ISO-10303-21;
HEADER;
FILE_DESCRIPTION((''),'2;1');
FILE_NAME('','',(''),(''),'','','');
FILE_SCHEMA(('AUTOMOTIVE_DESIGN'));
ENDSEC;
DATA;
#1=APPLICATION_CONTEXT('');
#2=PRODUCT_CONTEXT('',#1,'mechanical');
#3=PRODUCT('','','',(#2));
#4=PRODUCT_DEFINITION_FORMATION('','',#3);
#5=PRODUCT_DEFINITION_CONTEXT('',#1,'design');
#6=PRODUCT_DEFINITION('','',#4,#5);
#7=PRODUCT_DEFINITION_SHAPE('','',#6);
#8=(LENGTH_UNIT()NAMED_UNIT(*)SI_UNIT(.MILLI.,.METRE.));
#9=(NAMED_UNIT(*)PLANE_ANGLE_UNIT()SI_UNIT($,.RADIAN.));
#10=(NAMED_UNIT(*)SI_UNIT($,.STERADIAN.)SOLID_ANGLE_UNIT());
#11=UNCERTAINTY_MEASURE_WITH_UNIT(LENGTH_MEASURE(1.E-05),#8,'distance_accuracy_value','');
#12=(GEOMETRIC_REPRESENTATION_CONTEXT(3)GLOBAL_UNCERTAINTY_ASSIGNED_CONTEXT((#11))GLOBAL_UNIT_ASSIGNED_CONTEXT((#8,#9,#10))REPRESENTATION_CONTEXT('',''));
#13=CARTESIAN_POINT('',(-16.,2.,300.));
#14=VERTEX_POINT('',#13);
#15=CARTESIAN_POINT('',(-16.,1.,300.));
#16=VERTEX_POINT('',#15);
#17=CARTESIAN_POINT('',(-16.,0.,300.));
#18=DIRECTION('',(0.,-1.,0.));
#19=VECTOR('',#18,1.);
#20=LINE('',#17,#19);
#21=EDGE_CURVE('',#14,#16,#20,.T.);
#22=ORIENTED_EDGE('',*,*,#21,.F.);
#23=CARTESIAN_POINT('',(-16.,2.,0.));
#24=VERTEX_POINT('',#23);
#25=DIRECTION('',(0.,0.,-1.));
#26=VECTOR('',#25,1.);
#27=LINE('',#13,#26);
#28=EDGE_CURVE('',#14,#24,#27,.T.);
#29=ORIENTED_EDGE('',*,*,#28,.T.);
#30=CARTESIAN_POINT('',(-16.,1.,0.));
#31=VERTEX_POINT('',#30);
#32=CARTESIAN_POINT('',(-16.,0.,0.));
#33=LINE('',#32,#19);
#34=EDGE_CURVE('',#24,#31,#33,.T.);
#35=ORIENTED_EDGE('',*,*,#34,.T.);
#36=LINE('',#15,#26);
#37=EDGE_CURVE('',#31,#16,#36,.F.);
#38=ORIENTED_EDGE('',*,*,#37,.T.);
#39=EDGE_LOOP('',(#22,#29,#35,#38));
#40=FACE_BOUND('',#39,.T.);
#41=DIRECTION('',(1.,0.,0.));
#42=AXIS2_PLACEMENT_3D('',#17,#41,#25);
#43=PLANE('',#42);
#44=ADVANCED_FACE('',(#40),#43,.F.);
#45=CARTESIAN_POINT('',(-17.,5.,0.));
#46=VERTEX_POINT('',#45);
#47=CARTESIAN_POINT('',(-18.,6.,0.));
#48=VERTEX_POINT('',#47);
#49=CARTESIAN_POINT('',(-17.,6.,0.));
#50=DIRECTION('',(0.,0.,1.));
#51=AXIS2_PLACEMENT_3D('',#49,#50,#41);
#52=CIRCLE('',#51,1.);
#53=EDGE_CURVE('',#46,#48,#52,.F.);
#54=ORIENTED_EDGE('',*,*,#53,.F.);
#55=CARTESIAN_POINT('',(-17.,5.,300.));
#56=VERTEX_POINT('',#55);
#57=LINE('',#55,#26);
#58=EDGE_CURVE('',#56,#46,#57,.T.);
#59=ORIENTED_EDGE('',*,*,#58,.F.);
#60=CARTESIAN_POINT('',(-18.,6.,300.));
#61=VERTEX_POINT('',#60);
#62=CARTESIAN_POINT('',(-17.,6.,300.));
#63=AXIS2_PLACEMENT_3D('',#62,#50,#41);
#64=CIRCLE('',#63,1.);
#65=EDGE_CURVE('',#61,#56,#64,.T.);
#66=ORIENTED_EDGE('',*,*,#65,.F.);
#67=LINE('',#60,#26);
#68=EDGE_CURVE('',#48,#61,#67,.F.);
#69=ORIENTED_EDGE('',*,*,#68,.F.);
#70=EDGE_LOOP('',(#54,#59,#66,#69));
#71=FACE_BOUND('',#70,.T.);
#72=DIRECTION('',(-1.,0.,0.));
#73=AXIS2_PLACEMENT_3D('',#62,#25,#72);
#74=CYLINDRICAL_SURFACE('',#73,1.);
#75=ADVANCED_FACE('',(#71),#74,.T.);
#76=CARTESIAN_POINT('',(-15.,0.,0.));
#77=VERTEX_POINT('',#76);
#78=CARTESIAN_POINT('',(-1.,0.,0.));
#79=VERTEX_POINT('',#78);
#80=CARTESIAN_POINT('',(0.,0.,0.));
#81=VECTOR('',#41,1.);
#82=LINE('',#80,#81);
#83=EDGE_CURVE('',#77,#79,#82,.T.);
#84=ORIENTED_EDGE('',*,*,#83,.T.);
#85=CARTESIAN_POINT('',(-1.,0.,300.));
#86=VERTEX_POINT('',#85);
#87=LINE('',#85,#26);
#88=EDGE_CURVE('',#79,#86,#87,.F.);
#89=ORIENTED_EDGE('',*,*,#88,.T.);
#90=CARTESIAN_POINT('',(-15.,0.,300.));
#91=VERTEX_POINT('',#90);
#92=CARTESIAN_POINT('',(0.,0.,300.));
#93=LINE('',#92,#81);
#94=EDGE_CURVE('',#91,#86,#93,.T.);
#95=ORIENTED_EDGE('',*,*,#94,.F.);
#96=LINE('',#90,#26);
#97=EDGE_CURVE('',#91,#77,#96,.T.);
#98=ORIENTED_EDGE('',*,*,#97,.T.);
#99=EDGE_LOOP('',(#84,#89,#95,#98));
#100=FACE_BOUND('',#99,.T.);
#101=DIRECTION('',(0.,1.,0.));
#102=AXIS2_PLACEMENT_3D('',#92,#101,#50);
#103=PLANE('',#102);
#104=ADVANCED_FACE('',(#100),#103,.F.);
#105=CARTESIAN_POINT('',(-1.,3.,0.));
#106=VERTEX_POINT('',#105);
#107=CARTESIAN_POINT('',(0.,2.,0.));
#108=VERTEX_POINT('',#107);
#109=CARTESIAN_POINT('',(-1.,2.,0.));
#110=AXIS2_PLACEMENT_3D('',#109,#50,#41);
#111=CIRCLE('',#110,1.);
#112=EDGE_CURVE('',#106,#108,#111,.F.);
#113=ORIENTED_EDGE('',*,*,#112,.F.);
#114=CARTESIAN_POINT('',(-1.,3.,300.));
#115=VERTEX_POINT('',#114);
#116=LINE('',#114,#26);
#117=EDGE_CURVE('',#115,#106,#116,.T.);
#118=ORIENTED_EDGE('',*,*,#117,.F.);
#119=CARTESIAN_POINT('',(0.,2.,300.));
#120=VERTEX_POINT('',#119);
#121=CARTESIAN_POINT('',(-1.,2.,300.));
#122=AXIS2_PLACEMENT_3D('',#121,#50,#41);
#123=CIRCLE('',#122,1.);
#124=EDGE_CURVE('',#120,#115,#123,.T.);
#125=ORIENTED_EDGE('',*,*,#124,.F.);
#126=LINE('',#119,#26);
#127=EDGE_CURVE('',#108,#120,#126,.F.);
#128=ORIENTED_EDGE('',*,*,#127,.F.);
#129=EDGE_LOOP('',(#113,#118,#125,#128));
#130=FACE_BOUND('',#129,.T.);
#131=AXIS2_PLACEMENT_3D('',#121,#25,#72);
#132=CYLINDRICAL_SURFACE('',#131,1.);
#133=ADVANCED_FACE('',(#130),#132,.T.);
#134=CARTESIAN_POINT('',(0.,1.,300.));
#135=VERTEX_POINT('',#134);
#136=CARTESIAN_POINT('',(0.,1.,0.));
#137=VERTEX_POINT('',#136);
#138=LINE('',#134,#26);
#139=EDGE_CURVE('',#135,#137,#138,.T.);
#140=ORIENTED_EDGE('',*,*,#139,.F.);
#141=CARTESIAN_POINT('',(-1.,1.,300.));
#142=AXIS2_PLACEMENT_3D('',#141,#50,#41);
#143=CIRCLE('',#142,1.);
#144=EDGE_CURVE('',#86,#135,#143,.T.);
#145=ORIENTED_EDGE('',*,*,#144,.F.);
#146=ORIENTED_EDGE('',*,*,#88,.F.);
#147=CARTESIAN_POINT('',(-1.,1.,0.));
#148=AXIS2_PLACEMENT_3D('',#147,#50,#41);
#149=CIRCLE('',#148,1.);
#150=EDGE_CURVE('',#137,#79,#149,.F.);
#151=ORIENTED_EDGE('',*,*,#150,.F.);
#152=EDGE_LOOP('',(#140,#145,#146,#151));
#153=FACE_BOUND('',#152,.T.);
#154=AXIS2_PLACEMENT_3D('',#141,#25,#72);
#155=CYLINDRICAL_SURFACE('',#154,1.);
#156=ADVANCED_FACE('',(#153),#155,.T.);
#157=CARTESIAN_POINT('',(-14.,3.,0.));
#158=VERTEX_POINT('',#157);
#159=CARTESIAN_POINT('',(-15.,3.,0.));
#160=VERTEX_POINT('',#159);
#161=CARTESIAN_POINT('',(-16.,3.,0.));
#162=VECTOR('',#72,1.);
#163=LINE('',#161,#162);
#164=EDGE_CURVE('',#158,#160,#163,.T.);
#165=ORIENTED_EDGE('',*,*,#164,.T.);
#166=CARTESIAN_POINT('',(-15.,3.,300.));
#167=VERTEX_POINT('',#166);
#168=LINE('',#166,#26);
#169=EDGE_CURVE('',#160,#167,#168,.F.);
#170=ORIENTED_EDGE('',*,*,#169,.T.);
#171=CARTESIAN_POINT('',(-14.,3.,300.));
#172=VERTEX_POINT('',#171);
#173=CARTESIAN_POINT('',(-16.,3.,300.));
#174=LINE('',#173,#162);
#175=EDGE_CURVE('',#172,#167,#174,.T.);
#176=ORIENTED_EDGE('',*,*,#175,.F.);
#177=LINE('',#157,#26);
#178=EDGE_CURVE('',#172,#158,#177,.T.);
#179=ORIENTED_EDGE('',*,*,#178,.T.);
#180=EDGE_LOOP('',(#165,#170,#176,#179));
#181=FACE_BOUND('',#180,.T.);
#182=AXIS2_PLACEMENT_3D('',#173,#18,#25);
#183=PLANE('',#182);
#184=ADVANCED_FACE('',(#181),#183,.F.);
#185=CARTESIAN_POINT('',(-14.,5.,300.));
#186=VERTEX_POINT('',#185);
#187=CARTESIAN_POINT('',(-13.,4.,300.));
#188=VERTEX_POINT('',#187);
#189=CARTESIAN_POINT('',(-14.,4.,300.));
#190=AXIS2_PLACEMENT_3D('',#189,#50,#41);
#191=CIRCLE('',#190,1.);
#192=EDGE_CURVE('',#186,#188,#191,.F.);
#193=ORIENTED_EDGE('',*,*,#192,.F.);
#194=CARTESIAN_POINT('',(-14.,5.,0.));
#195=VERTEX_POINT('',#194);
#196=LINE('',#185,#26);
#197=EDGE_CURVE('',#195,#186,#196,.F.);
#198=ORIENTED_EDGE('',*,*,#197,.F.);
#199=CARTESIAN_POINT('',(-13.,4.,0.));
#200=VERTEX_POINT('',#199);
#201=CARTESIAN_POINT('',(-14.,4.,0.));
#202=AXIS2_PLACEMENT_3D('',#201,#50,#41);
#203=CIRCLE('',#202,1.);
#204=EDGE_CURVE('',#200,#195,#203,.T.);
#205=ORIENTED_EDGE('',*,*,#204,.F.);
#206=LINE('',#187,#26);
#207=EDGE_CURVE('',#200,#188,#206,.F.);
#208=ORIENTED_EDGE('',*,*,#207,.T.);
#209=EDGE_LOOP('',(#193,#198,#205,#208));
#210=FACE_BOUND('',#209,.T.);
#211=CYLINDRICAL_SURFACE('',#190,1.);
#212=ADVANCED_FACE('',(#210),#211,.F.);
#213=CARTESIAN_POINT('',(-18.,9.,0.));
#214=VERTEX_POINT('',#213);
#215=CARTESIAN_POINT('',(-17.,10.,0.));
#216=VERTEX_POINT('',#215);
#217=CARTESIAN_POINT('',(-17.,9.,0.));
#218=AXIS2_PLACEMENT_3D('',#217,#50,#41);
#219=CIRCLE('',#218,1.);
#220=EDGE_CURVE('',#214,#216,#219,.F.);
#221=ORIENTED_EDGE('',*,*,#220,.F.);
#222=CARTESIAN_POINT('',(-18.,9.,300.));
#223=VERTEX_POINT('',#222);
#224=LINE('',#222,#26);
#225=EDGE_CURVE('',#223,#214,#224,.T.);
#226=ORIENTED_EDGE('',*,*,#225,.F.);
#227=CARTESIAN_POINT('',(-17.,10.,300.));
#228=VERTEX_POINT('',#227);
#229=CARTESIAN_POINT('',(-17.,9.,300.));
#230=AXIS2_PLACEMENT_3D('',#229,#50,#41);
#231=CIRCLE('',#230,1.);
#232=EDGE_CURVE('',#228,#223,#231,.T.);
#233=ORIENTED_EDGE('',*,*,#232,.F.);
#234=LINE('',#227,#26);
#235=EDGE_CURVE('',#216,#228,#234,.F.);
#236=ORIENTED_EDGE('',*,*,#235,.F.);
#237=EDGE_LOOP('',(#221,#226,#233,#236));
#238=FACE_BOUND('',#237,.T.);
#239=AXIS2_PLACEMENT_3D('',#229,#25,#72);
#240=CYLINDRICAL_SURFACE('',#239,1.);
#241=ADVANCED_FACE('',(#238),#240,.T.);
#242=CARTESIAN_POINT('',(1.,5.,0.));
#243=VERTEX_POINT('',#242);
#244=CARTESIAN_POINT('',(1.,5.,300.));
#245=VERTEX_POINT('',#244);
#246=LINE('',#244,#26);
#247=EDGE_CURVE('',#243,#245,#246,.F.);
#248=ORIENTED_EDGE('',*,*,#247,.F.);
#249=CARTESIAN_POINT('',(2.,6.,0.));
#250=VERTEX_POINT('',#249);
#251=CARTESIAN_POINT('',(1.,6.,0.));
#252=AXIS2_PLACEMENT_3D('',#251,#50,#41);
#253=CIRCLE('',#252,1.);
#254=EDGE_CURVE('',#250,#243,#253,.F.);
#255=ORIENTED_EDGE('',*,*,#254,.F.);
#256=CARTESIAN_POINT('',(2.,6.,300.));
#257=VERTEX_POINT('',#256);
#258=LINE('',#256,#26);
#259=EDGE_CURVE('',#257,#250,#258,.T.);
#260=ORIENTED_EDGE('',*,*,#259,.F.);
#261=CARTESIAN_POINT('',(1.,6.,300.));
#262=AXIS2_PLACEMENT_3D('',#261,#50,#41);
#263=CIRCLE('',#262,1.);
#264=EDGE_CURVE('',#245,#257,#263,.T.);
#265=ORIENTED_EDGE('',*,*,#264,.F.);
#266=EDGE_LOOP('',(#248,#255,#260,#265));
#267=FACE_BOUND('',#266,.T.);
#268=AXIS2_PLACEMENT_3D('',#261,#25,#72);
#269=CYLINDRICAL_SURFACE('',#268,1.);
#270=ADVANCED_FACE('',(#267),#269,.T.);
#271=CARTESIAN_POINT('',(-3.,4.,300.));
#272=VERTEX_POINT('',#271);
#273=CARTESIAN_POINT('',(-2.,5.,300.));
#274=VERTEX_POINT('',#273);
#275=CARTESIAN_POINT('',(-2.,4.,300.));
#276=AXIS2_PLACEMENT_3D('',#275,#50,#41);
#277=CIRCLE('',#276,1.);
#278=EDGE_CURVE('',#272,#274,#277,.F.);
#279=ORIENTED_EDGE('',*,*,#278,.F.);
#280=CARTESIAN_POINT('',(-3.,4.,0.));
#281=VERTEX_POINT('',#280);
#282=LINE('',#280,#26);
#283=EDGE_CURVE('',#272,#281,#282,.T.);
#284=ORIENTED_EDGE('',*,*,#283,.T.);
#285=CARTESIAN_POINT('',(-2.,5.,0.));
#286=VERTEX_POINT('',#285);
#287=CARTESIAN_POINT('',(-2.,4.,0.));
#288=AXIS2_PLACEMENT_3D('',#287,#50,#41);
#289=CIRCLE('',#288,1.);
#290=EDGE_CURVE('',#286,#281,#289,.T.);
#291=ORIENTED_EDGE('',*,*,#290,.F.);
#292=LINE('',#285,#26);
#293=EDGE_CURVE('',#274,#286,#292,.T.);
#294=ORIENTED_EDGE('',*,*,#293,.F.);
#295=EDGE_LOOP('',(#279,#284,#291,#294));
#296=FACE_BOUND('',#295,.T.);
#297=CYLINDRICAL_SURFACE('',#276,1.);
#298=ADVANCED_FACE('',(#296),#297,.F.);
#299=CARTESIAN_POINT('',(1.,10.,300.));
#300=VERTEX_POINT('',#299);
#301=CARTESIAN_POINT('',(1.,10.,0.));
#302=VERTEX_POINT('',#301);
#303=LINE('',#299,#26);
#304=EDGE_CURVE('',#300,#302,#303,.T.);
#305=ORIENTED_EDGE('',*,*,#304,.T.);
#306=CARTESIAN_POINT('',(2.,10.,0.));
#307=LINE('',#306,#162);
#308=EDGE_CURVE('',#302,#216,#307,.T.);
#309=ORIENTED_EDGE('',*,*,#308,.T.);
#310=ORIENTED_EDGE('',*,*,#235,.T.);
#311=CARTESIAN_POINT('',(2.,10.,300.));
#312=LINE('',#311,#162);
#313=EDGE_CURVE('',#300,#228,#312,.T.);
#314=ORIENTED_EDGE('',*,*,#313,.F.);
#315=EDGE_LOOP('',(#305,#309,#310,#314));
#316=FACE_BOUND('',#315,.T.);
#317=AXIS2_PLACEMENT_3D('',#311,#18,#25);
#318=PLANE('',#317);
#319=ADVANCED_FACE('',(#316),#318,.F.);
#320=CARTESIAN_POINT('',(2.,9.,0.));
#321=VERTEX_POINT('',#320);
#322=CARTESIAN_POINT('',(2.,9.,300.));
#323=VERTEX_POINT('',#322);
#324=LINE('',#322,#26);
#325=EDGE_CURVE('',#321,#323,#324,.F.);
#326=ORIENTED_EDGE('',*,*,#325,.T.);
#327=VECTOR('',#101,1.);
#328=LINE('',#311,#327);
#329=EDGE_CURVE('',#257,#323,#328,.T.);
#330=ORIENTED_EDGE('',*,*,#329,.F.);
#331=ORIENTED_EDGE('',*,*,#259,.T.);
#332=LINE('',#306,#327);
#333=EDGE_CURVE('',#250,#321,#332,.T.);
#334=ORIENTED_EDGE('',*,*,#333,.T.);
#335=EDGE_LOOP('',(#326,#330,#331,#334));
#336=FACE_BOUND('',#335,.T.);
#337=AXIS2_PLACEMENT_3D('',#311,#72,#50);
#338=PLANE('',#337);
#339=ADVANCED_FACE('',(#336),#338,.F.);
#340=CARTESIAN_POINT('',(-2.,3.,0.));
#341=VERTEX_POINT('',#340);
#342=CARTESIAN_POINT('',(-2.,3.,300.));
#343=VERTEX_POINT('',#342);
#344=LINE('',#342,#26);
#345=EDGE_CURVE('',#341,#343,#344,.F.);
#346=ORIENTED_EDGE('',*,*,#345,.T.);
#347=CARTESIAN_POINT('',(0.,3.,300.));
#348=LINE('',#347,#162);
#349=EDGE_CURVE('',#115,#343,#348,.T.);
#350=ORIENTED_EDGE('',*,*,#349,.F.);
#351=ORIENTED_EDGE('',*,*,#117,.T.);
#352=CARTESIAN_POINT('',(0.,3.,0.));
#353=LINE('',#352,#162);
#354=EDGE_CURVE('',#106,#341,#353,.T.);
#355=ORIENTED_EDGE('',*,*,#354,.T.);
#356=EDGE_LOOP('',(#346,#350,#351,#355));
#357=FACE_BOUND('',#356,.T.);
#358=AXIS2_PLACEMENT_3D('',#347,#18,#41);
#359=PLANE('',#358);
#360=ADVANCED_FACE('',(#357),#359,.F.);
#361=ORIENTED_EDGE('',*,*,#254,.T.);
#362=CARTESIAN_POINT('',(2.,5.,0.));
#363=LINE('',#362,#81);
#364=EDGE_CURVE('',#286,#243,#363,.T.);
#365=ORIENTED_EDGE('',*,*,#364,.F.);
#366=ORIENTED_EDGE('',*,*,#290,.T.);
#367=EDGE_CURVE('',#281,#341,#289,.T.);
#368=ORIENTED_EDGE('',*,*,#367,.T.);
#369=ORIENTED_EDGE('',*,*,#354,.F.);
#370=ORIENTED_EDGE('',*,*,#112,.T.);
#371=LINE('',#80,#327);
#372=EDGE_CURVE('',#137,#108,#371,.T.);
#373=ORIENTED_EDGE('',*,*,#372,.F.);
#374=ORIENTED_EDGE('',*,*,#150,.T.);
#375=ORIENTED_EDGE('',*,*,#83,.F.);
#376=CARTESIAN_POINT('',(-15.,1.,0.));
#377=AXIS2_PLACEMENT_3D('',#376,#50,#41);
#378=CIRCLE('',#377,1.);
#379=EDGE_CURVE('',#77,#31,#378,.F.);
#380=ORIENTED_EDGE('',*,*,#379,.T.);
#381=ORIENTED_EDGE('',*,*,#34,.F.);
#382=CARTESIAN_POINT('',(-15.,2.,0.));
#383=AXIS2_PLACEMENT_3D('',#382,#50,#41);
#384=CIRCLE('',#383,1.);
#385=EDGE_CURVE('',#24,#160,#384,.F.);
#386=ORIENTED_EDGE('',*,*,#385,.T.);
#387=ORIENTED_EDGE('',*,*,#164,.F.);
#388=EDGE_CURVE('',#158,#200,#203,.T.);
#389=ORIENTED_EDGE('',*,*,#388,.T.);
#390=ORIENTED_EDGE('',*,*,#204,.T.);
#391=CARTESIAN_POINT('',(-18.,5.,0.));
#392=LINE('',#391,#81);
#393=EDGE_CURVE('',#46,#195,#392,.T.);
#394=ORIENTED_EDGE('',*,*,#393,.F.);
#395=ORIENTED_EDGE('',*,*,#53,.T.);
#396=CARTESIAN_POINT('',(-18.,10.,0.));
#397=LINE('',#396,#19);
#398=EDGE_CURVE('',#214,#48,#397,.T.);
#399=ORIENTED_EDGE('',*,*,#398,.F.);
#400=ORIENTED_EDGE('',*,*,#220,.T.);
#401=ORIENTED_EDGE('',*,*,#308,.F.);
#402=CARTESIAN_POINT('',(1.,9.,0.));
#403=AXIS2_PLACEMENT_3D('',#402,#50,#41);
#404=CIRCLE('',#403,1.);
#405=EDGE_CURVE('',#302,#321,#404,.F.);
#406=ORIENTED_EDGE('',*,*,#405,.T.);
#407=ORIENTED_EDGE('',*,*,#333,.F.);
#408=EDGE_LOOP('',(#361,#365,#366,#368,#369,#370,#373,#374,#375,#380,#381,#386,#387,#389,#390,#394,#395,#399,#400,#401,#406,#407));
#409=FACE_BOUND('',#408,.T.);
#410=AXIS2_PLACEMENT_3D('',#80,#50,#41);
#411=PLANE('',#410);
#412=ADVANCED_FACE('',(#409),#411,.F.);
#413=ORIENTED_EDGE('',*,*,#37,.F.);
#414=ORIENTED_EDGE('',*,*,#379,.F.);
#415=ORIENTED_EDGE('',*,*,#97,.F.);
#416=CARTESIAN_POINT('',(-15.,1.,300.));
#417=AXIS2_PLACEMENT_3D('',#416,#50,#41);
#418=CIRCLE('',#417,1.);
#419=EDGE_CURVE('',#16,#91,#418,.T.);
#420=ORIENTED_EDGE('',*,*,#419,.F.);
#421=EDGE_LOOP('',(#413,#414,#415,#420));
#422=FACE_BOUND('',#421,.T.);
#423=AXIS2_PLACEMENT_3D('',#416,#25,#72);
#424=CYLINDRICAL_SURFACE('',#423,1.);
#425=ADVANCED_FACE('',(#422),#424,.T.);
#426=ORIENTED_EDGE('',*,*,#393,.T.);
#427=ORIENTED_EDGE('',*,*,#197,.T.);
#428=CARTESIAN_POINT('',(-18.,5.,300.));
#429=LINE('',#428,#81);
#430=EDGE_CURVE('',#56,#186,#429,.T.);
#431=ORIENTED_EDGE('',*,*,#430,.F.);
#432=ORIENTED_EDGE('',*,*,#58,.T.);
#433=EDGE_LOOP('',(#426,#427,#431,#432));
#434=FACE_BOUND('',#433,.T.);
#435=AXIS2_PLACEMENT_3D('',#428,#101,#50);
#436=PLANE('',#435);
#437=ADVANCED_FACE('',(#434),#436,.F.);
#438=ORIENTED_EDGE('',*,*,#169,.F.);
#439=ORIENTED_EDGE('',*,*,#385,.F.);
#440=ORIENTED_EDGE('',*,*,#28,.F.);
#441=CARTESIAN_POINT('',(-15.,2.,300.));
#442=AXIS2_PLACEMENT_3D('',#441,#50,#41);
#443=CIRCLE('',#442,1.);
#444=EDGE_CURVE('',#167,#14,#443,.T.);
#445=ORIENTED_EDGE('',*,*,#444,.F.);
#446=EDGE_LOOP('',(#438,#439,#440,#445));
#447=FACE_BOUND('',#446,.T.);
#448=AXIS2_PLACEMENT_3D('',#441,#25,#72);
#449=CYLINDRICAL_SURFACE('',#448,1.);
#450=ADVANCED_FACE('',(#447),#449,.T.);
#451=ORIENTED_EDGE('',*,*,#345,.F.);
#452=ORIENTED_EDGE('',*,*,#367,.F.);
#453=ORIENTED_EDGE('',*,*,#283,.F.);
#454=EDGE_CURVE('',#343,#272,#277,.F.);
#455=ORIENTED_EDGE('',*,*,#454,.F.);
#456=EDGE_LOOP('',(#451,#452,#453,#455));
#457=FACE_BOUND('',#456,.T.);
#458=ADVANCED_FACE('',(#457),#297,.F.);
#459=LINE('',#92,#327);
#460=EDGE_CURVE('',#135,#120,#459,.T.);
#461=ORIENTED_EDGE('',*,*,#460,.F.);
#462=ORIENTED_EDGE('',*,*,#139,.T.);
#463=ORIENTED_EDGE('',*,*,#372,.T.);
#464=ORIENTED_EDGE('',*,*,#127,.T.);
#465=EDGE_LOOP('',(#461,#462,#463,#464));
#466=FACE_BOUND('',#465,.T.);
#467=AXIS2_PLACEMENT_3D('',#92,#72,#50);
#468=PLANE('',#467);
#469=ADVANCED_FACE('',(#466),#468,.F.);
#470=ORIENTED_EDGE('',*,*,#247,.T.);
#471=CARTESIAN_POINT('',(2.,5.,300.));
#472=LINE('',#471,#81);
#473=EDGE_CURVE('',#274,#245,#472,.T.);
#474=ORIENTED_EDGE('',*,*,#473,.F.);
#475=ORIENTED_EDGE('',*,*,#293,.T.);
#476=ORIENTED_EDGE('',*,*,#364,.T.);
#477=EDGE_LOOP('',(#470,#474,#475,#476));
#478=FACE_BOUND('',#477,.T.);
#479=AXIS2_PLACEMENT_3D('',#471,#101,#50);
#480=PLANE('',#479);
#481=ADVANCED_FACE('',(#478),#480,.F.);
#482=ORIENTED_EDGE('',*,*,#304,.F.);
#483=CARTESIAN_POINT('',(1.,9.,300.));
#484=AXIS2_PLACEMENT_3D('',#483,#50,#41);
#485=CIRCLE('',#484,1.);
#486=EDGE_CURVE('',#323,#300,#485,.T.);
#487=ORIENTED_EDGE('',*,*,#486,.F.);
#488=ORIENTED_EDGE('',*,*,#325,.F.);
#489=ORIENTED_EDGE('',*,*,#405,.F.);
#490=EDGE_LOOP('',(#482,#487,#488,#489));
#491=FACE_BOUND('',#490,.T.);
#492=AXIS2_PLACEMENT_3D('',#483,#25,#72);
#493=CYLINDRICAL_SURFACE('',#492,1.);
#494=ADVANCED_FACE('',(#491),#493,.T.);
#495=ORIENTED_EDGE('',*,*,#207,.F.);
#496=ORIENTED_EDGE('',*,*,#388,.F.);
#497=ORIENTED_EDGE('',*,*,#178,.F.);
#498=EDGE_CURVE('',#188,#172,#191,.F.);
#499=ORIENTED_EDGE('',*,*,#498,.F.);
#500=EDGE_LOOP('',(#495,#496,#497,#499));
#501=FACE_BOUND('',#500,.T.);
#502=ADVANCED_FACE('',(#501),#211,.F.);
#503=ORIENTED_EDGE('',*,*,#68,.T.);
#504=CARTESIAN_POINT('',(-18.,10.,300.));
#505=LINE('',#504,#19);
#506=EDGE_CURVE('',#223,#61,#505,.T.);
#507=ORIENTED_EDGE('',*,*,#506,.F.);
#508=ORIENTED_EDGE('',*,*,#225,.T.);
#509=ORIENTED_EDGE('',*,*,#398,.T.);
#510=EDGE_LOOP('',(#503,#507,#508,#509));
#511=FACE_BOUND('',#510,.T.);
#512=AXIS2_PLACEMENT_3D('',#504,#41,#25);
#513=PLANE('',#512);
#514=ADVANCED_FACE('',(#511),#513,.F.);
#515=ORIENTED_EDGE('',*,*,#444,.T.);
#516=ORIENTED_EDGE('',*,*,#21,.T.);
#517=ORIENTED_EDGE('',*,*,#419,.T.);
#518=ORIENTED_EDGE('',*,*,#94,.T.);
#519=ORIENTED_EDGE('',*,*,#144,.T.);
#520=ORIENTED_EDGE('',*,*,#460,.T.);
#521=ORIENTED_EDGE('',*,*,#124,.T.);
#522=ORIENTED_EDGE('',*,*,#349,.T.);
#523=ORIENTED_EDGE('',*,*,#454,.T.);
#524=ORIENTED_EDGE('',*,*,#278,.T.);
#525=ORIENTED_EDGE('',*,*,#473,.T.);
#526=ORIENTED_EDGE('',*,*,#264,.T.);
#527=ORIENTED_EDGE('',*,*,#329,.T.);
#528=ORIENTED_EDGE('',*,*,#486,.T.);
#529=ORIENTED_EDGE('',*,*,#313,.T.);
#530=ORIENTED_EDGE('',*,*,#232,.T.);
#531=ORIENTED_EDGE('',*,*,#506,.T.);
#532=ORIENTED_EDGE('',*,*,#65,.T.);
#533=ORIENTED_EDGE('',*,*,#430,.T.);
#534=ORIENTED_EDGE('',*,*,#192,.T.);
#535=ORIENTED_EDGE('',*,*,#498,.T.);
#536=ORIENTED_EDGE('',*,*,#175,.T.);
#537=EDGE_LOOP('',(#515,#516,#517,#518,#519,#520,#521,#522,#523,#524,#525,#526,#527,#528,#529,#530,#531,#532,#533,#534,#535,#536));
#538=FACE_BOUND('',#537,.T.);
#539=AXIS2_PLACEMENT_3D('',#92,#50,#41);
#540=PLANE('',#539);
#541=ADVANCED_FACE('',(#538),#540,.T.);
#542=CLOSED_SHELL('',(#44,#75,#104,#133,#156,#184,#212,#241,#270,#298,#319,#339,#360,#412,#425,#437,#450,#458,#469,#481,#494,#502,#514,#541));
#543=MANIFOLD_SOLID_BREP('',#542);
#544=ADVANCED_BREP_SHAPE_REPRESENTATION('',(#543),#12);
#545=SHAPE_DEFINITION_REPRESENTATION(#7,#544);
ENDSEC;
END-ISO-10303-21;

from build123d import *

# Parameters (mm, degrees)
BOSS_EXTRUDE1_DEPTH = 300
FILLET1_R           = 1


with BuildPart() as part:
    # Sketch1 → Boss-Extrude1 (new body)
    with BuildSketch(Plane.XY):
        Polygon((0, 0), (-16, 0), (-16, 3), (-13, 3), (-13, 5), (-18, 5), (-18, 10), (2, 10), (2, 5), (-3, 5), (-3, 3), (0, 3), align=None)
    extrude(amount=BOSS_EXTRUDE1_DEPTH)

    # Fillet1
    fillet1_edges = [part.edges().sort_by_distance(p)[0] for p in [
        (-13, 5, 150),
        (-13, 3, 150),
        (-3, 5, 150),
        (-3, 3, 150),
        (0, 0, 150),
        (0, 3, 150),
        (-16, 3, 150),
        (-16, 0, 150),
        (2, 5, 150),
        (-18, 5, 150),
        (2, 10, 150),
        (-18, 10, 150),
    ]]
    fillet(fillet1_edges, radius=FILLET1_R - 0.0001)  # a hair under: the kernel refuses the full size


solid = part.part
